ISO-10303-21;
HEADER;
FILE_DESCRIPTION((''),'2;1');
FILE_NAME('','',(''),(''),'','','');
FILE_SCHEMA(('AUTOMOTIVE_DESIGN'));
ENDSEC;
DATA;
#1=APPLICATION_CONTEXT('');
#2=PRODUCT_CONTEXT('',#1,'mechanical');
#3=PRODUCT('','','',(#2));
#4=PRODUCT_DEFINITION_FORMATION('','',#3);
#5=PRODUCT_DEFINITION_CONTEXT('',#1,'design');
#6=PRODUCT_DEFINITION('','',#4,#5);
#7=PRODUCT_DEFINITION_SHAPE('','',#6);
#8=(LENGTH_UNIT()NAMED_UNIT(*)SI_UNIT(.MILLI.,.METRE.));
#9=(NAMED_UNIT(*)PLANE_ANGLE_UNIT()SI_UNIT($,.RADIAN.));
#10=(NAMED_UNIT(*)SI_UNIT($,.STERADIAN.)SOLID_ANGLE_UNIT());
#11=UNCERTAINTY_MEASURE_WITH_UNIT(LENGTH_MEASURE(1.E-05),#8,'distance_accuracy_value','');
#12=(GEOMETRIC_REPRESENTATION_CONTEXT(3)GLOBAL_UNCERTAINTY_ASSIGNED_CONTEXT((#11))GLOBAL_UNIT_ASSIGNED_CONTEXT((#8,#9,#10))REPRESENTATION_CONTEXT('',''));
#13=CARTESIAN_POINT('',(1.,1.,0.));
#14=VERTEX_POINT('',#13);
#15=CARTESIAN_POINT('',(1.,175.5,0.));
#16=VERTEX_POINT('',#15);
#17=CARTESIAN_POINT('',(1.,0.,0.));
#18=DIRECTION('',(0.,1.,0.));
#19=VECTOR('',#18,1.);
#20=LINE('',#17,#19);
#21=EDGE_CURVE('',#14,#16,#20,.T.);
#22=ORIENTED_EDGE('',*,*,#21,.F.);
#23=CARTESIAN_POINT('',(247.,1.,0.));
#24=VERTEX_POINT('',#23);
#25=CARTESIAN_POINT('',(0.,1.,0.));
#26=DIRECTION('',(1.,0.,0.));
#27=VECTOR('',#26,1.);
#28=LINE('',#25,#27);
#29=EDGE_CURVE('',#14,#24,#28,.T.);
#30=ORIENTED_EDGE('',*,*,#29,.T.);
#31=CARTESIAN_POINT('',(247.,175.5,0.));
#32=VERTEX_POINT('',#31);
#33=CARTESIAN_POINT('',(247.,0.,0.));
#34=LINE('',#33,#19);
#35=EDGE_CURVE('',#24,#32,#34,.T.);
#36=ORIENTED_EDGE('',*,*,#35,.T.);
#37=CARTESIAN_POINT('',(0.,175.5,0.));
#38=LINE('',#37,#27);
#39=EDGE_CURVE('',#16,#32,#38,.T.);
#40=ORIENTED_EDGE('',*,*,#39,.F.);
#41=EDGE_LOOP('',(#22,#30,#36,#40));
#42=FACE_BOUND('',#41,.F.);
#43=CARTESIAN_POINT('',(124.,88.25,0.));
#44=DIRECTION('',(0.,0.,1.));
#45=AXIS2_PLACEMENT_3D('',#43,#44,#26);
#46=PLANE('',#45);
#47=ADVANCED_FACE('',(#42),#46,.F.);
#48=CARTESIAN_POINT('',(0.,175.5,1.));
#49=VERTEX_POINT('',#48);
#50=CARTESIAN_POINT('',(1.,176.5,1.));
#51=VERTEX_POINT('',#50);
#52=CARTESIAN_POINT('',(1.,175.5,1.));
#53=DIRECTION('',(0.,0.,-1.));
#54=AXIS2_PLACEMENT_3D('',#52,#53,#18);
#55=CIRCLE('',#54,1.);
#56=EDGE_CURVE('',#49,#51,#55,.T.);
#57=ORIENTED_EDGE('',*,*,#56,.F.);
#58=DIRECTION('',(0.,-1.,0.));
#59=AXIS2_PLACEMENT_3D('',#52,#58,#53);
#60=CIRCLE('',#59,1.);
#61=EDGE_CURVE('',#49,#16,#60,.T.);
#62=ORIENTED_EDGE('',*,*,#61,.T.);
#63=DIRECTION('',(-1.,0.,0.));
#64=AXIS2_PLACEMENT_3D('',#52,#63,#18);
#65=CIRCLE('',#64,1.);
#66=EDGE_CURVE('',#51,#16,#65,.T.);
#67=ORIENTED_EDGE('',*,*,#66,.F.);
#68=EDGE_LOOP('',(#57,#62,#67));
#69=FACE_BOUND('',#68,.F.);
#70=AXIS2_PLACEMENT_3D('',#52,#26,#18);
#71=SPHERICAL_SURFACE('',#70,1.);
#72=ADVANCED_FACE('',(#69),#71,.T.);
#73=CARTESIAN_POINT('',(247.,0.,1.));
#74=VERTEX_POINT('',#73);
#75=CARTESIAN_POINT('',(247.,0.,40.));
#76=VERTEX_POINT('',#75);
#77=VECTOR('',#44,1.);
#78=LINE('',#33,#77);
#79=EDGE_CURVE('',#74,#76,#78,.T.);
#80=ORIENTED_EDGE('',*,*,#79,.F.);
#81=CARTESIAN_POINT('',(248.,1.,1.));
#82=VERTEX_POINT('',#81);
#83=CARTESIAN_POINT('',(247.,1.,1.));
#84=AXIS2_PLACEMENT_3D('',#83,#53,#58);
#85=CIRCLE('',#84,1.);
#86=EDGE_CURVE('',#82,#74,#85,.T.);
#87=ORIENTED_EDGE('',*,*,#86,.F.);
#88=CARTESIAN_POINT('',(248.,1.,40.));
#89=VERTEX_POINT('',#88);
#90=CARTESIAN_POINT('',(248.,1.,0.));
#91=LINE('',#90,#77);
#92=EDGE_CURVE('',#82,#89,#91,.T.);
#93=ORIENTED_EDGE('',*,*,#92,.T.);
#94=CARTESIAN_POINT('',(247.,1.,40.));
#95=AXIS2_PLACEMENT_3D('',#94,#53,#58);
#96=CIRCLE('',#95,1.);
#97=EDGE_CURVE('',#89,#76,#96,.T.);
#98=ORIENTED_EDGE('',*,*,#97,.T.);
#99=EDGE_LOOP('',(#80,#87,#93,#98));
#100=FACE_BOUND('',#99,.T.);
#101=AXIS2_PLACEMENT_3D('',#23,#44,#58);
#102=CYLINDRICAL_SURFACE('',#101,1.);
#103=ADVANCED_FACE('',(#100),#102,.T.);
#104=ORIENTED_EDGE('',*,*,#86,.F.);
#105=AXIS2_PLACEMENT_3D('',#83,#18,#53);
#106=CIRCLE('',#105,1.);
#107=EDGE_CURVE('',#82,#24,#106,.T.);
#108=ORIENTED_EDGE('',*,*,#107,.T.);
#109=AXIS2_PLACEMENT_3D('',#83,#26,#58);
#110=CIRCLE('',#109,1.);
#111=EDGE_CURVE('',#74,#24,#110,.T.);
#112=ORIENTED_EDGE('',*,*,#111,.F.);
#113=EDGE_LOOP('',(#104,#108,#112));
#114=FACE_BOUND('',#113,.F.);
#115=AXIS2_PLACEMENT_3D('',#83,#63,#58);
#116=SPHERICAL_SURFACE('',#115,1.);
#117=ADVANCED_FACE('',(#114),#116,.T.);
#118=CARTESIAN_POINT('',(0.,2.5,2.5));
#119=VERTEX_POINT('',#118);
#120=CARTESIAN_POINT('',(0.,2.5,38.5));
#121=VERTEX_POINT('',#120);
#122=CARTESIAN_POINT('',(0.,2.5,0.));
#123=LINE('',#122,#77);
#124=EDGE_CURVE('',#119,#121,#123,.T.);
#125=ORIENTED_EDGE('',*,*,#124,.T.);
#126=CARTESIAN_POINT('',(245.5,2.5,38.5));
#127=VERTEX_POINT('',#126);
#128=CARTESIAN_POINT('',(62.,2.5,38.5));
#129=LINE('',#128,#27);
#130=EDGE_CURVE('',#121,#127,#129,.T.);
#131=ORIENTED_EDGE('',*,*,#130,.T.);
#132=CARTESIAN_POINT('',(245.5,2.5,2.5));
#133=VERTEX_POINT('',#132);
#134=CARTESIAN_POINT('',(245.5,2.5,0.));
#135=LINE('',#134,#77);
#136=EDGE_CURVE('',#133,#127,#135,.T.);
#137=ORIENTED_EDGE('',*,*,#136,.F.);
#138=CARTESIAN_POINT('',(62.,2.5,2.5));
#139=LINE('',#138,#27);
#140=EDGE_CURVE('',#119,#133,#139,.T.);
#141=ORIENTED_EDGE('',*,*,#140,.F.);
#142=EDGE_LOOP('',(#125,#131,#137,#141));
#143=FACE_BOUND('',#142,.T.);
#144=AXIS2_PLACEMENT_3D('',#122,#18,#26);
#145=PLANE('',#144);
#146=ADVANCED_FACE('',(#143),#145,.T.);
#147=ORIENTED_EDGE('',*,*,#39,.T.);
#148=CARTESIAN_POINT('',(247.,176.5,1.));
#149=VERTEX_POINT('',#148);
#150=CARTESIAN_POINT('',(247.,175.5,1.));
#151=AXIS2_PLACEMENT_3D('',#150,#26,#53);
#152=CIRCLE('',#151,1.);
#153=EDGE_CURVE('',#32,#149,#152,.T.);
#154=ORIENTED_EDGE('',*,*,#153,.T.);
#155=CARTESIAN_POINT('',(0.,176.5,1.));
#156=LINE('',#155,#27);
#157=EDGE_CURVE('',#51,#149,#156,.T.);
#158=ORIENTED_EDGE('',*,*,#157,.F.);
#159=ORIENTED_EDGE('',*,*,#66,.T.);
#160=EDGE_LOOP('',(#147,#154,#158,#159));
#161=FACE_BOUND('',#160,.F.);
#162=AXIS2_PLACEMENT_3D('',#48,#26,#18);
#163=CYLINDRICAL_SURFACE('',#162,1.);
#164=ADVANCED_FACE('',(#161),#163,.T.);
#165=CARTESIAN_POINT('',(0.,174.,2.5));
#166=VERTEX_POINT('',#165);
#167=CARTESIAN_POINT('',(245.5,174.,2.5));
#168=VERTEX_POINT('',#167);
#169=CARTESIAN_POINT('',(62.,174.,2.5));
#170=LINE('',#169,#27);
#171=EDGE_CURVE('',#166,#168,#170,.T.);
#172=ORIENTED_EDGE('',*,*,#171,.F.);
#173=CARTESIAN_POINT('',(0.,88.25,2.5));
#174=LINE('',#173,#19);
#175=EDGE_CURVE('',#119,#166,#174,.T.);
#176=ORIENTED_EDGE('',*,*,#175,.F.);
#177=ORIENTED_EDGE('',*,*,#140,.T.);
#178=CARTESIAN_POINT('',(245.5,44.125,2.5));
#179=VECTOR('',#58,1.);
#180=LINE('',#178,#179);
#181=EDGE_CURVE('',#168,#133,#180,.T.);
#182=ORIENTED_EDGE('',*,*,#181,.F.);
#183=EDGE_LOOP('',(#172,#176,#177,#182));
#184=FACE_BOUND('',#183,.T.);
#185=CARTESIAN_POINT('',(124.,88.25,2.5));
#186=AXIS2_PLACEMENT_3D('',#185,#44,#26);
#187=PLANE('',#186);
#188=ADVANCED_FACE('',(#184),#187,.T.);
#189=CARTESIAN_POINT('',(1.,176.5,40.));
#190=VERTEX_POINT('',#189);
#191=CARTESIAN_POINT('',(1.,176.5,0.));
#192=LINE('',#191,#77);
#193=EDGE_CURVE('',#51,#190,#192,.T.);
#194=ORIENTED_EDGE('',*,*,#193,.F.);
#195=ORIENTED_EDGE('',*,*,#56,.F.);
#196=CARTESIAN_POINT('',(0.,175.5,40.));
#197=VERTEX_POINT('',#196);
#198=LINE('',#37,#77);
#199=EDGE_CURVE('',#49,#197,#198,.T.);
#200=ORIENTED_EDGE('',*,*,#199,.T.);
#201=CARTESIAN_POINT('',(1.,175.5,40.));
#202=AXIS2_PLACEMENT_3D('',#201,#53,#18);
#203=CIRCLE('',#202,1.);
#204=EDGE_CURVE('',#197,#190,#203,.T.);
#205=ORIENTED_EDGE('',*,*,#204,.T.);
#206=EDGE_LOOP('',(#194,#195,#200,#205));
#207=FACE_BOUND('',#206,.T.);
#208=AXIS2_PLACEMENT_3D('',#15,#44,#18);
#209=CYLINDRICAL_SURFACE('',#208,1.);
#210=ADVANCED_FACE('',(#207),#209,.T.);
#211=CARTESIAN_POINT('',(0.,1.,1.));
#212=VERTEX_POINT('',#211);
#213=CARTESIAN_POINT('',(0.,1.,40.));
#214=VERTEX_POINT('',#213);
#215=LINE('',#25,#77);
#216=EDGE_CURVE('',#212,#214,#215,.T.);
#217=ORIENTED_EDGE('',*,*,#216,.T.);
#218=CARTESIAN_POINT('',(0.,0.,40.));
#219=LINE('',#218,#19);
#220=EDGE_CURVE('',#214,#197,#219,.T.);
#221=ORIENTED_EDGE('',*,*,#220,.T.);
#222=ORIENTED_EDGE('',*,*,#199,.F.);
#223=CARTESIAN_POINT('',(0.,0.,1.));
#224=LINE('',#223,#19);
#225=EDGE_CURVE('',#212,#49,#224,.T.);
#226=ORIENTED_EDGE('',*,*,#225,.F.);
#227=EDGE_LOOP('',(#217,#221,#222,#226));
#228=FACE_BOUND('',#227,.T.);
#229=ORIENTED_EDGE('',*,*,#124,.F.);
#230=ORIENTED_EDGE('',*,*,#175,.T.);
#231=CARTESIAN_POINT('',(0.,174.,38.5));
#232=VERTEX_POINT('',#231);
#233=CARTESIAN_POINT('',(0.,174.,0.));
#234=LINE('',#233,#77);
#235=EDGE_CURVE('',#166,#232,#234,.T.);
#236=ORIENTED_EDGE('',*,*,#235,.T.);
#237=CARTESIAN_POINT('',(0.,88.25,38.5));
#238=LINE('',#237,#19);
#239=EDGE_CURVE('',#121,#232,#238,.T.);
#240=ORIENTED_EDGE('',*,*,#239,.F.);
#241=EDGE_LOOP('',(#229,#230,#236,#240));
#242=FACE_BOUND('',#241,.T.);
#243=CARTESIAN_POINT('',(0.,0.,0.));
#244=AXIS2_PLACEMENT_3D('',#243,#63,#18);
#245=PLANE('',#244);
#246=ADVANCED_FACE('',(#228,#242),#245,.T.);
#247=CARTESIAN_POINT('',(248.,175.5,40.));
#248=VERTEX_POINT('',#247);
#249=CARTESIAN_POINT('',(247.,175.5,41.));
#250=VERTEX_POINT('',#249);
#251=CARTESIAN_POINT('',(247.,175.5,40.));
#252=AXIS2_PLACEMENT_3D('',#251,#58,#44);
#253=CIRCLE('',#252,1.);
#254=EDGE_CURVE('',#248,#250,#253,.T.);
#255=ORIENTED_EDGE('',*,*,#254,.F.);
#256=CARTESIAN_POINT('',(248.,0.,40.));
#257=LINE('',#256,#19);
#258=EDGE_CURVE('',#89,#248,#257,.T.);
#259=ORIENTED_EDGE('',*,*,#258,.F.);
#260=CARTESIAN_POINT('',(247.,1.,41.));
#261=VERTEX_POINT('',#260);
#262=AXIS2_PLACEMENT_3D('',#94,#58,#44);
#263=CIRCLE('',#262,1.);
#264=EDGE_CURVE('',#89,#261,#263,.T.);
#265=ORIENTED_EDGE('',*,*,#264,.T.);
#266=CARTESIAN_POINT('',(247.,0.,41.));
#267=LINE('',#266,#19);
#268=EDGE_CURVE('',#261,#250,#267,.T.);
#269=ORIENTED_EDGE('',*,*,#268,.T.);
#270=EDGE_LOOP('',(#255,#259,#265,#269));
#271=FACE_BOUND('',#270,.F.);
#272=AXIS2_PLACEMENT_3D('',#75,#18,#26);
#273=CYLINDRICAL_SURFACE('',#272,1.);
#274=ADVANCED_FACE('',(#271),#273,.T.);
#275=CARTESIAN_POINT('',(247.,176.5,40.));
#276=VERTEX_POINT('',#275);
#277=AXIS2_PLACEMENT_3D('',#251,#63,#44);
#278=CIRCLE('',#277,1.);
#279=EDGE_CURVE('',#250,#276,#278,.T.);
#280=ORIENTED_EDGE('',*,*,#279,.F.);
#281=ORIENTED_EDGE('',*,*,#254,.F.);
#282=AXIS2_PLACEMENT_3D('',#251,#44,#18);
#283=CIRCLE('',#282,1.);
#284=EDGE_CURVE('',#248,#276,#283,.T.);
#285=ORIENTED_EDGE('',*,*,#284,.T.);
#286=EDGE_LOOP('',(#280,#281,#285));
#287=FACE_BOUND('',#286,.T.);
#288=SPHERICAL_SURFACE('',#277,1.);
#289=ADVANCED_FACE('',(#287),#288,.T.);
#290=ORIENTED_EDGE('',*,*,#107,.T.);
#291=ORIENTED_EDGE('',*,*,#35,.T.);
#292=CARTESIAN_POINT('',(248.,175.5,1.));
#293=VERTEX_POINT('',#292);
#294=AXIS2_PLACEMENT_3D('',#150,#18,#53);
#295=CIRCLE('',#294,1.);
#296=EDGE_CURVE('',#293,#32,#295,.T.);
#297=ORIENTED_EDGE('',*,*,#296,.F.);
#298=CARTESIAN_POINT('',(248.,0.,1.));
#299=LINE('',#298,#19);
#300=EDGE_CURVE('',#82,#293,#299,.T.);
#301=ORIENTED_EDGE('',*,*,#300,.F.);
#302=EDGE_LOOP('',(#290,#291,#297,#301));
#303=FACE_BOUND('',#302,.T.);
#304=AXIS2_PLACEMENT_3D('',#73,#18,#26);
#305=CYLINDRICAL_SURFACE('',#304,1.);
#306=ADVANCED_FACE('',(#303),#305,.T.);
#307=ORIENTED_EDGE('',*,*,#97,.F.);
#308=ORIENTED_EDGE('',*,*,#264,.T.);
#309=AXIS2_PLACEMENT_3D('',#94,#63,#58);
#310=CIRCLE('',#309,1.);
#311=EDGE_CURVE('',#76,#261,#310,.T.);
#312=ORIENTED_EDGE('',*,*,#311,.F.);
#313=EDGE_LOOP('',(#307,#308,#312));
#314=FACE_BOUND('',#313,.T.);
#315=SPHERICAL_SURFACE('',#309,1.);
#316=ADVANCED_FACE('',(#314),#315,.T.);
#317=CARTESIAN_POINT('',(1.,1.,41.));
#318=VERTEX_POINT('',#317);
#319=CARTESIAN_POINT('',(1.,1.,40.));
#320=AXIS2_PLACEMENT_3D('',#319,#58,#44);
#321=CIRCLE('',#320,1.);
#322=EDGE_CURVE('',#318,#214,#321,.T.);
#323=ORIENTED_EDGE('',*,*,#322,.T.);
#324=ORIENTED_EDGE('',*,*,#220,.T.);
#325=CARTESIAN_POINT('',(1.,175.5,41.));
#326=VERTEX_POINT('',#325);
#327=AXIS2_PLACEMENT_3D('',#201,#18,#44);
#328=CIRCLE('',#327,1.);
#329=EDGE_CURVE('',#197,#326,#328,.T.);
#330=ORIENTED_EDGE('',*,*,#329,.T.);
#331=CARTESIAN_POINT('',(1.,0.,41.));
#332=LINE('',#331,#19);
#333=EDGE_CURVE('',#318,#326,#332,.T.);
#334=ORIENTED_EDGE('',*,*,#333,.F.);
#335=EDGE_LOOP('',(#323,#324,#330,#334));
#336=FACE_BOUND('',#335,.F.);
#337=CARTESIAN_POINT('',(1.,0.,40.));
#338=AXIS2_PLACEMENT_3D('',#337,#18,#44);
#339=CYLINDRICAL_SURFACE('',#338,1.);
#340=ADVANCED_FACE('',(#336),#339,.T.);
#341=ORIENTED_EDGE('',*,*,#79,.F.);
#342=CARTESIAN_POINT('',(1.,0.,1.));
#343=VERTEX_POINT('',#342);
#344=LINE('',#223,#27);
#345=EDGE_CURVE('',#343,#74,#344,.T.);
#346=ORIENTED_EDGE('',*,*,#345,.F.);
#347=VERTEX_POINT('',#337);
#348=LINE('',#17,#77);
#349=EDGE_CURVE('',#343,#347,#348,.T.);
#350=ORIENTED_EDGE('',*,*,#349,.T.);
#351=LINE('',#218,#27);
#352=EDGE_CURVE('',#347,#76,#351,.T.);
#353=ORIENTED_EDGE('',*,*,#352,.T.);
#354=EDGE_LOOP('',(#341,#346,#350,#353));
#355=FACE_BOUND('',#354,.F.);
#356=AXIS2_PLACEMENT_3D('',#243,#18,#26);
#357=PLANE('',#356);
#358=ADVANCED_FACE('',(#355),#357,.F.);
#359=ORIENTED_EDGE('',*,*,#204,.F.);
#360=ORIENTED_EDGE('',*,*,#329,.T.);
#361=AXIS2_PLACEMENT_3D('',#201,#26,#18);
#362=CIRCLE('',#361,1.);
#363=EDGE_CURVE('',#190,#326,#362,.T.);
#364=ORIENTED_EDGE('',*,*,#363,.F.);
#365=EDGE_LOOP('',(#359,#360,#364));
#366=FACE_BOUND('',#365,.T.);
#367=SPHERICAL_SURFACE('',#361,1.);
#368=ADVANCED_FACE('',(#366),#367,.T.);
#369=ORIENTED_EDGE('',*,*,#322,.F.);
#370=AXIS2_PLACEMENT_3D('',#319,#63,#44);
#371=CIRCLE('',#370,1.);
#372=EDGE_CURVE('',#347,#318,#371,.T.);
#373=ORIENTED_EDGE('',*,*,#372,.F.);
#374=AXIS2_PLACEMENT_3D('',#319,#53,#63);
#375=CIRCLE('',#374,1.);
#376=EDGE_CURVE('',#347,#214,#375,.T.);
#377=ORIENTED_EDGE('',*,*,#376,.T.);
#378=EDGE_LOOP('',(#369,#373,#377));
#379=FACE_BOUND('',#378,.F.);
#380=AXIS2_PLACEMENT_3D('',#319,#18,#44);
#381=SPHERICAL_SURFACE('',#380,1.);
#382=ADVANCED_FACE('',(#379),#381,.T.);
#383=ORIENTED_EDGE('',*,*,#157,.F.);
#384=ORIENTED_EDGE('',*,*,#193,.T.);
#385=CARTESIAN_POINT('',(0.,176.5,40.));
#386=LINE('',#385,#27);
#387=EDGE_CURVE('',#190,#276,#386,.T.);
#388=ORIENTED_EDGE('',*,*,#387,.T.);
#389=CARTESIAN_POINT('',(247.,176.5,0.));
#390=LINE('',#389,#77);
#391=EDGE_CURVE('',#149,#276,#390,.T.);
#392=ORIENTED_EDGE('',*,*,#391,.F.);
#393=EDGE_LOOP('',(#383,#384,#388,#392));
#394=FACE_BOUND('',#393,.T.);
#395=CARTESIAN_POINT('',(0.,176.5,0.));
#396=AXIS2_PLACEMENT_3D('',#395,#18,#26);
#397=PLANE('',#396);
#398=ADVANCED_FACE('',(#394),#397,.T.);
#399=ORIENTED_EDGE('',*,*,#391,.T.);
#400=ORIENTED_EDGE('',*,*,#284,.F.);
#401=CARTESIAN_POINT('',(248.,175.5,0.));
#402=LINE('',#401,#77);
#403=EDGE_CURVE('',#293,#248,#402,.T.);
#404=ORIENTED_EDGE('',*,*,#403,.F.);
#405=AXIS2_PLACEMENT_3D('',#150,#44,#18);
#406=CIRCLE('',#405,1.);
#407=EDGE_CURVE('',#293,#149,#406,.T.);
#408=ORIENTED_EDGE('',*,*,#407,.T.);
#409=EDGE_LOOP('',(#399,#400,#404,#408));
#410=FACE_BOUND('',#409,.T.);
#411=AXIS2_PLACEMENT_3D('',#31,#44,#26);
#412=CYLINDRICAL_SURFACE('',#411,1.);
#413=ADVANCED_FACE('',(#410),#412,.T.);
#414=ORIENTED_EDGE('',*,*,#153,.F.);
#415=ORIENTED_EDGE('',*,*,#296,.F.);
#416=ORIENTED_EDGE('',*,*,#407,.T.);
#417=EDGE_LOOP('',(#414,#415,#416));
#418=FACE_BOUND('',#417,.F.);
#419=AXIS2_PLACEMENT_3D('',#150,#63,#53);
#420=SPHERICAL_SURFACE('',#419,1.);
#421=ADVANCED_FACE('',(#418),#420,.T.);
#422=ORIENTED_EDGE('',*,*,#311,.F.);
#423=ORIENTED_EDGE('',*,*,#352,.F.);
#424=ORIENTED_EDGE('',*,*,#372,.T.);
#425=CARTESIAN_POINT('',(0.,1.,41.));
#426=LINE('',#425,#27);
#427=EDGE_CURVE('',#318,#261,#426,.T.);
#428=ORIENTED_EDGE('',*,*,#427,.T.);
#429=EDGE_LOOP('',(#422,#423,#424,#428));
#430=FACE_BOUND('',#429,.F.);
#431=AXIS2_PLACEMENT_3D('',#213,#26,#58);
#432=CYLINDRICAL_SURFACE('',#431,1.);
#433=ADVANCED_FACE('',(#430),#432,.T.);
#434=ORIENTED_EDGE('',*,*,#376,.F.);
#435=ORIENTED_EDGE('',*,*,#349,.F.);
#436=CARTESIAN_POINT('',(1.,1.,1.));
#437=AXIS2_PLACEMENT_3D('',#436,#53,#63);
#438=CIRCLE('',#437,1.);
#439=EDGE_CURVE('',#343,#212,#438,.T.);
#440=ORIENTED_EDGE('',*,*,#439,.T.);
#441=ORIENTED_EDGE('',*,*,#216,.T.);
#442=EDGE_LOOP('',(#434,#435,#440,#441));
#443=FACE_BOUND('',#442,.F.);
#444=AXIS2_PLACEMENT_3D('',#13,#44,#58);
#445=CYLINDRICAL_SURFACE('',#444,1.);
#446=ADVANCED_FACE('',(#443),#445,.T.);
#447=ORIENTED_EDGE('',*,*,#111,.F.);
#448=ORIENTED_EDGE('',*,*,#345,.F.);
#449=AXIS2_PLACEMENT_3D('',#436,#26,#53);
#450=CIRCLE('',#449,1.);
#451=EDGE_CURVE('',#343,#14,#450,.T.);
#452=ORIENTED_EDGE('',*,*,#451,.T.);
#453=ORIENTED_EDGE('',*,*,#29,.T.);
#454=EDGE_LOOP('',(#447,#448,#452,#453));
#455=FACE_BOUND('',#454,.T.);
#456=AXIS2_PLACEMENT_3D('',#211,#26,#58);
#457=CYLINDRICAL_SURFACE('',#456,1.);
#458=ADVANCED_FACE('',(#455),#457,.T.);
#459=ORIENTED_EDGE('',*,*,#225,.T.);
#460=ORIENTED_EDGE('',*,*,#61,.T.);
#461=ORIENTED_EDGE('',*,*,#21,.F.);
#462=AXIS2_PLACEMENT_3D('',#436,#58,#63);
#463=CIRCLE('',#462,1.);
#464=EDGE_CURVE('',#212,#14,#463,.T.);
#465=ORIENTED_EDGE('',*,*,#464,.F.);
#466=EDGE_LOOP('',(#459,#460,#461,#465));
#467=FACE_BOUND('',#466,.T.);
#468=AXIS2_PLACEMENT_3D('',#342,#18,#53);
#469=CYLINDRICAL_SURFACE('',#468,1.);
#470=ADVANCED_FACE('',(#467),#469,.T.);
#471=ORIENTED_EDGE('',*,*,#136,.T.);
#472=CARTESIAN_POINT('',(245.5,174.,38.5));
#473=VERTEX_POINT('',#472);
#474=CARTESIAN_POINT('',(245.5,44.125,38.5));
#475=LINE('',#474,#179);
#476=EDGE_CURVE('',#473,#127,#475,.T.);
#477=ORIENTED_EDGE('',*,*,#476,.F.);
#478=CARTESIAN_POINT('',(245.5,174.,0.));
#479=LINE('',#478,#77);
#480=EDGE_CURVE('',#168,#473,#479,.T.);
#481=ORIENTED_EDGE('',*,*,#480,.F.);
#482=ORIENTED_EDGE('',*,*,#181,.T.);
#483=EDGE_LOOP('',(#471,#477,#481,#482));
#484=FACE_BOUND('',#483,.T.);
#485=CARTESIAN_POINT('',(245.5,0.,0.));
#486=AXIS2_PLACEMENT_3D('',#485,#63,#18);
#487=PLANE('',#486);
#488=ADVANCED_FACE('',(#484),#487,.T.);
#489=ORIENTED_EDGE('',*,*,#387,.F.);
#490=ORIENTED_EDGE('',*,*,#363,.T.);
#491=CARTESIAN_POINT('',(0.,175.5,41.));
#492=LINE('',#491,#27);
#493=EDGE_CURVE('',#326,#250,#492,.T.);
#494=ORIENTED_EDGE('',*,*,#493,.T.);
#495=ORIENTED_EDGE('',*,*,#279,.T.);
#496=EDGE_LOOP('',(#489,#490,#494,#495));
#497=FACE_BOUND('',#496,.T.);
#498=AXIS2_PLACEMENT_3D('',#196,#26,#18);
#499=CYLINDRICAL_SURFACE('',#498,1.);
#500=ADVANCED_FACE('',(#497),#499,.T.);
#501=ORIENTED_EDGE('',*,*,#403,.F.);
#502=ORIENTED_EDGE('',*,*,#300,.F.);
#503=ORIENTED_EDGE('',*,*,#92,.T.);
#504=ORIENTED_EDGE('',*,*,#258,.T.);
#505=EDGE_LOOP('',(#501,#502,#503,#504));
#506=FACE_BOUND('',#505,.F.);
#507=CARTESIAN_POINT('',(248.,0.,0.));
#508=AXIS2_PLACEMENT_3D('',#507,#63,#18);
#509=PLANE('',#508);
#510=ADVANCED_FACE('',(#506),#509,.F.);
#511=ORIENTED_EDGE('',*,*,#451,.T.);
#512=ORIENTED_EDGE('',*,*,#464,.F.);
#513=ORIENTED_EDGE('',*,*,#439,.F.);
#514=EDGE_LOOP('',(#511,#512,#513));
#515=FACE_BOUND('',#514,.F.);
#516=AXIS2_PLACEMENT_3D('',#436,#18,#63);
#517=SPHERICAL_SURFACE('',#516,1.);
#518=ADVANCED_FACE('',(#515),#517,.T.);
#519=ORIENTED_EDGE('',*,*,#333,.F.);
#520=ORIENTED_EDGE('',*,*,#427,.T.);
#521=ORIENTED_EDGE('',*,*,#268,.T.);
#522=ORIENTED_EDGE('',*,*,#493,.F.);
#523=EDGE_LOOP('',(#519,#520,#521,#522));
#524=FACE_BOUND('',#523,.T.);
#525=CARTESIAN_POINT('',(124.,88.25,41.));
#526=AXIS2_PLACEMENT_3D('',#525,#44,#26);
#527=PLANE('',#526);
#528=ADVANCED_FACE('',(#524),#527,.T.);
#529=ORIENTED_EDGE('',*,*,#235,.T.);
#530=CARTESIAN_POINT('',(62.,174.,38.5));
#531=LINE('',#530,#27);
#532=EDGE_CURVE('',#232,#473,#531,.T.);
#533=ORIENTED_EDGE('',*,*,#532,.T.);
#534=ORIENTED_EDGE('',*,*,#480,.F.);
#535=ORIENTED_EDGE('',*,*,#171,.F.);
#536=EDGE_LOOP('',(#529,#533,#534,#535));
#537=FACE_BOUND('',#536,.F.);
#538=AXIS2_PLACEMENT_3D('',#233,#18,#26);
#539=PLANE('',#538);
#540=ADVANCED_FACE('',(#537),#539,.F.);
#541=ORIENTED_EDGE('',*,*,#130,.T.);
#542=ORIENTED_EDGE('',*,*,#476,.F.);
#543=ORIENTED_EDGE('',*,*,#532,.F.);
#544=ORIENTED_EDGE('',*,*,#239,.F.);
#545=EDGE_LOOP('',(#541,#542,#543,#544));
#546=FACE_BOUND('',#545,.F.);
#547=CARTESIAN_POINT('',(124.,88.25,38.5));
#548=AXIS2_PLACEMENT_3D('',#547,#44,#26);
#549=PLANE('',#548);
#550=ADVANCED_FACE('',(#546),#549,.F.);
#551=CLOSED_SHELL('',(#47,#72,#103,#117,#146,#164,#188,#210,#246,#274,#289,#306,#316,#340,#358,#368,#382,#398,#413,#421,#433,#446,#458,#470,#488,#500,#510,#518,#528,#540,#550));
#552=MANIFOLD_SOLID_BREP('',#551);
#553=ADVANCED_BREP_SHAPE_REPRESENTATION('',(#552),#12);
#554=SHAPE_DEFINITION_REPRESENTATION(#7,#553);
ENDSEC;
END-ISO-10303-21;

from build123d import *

# Parameters (mm, degrees)
F0_W     = 248
F0_H     = 176.5
F1_DEPTH = 41
F3_T     = -2.5
F4_R     = 1


with BuildPart() as f1:
    # F0 (on Top) → F1 (new body)
    with BuildSketch(Plane.XY):
        with Locations((124, 88.25)):
            Rectangle(F0_W, F0_H)
    extrude(amount=F1_DEPTH)

    # F3
    f3_openings = [f1.faces().sort_by_distance(p)[0] for p in [
        (0, 88.25, 20.5),
    ]]
    offset(amount=F3_T, openings=f3_openings)

    # F4
    f4_edges = [f1.edges().sort_by_distance(p)[0] for p in [
        (124, 176.5, 41),
        (124, 176.5, 0),
        (0, 176.5, 20.5),
        (0, 88.25, 0),
        (0, 88.25, 41),
        (124, 0, 41),
        (0, 0, 20.5),
        (124, 0, 0),
        (248, 0, 20.5),
        (248, 88.25, 41),
        (248, 88.25, 0),
        (248, 176.5, 20.5),
    ]]
    fillet(f4_edges, radius=F4_R)


solid = f1.part
